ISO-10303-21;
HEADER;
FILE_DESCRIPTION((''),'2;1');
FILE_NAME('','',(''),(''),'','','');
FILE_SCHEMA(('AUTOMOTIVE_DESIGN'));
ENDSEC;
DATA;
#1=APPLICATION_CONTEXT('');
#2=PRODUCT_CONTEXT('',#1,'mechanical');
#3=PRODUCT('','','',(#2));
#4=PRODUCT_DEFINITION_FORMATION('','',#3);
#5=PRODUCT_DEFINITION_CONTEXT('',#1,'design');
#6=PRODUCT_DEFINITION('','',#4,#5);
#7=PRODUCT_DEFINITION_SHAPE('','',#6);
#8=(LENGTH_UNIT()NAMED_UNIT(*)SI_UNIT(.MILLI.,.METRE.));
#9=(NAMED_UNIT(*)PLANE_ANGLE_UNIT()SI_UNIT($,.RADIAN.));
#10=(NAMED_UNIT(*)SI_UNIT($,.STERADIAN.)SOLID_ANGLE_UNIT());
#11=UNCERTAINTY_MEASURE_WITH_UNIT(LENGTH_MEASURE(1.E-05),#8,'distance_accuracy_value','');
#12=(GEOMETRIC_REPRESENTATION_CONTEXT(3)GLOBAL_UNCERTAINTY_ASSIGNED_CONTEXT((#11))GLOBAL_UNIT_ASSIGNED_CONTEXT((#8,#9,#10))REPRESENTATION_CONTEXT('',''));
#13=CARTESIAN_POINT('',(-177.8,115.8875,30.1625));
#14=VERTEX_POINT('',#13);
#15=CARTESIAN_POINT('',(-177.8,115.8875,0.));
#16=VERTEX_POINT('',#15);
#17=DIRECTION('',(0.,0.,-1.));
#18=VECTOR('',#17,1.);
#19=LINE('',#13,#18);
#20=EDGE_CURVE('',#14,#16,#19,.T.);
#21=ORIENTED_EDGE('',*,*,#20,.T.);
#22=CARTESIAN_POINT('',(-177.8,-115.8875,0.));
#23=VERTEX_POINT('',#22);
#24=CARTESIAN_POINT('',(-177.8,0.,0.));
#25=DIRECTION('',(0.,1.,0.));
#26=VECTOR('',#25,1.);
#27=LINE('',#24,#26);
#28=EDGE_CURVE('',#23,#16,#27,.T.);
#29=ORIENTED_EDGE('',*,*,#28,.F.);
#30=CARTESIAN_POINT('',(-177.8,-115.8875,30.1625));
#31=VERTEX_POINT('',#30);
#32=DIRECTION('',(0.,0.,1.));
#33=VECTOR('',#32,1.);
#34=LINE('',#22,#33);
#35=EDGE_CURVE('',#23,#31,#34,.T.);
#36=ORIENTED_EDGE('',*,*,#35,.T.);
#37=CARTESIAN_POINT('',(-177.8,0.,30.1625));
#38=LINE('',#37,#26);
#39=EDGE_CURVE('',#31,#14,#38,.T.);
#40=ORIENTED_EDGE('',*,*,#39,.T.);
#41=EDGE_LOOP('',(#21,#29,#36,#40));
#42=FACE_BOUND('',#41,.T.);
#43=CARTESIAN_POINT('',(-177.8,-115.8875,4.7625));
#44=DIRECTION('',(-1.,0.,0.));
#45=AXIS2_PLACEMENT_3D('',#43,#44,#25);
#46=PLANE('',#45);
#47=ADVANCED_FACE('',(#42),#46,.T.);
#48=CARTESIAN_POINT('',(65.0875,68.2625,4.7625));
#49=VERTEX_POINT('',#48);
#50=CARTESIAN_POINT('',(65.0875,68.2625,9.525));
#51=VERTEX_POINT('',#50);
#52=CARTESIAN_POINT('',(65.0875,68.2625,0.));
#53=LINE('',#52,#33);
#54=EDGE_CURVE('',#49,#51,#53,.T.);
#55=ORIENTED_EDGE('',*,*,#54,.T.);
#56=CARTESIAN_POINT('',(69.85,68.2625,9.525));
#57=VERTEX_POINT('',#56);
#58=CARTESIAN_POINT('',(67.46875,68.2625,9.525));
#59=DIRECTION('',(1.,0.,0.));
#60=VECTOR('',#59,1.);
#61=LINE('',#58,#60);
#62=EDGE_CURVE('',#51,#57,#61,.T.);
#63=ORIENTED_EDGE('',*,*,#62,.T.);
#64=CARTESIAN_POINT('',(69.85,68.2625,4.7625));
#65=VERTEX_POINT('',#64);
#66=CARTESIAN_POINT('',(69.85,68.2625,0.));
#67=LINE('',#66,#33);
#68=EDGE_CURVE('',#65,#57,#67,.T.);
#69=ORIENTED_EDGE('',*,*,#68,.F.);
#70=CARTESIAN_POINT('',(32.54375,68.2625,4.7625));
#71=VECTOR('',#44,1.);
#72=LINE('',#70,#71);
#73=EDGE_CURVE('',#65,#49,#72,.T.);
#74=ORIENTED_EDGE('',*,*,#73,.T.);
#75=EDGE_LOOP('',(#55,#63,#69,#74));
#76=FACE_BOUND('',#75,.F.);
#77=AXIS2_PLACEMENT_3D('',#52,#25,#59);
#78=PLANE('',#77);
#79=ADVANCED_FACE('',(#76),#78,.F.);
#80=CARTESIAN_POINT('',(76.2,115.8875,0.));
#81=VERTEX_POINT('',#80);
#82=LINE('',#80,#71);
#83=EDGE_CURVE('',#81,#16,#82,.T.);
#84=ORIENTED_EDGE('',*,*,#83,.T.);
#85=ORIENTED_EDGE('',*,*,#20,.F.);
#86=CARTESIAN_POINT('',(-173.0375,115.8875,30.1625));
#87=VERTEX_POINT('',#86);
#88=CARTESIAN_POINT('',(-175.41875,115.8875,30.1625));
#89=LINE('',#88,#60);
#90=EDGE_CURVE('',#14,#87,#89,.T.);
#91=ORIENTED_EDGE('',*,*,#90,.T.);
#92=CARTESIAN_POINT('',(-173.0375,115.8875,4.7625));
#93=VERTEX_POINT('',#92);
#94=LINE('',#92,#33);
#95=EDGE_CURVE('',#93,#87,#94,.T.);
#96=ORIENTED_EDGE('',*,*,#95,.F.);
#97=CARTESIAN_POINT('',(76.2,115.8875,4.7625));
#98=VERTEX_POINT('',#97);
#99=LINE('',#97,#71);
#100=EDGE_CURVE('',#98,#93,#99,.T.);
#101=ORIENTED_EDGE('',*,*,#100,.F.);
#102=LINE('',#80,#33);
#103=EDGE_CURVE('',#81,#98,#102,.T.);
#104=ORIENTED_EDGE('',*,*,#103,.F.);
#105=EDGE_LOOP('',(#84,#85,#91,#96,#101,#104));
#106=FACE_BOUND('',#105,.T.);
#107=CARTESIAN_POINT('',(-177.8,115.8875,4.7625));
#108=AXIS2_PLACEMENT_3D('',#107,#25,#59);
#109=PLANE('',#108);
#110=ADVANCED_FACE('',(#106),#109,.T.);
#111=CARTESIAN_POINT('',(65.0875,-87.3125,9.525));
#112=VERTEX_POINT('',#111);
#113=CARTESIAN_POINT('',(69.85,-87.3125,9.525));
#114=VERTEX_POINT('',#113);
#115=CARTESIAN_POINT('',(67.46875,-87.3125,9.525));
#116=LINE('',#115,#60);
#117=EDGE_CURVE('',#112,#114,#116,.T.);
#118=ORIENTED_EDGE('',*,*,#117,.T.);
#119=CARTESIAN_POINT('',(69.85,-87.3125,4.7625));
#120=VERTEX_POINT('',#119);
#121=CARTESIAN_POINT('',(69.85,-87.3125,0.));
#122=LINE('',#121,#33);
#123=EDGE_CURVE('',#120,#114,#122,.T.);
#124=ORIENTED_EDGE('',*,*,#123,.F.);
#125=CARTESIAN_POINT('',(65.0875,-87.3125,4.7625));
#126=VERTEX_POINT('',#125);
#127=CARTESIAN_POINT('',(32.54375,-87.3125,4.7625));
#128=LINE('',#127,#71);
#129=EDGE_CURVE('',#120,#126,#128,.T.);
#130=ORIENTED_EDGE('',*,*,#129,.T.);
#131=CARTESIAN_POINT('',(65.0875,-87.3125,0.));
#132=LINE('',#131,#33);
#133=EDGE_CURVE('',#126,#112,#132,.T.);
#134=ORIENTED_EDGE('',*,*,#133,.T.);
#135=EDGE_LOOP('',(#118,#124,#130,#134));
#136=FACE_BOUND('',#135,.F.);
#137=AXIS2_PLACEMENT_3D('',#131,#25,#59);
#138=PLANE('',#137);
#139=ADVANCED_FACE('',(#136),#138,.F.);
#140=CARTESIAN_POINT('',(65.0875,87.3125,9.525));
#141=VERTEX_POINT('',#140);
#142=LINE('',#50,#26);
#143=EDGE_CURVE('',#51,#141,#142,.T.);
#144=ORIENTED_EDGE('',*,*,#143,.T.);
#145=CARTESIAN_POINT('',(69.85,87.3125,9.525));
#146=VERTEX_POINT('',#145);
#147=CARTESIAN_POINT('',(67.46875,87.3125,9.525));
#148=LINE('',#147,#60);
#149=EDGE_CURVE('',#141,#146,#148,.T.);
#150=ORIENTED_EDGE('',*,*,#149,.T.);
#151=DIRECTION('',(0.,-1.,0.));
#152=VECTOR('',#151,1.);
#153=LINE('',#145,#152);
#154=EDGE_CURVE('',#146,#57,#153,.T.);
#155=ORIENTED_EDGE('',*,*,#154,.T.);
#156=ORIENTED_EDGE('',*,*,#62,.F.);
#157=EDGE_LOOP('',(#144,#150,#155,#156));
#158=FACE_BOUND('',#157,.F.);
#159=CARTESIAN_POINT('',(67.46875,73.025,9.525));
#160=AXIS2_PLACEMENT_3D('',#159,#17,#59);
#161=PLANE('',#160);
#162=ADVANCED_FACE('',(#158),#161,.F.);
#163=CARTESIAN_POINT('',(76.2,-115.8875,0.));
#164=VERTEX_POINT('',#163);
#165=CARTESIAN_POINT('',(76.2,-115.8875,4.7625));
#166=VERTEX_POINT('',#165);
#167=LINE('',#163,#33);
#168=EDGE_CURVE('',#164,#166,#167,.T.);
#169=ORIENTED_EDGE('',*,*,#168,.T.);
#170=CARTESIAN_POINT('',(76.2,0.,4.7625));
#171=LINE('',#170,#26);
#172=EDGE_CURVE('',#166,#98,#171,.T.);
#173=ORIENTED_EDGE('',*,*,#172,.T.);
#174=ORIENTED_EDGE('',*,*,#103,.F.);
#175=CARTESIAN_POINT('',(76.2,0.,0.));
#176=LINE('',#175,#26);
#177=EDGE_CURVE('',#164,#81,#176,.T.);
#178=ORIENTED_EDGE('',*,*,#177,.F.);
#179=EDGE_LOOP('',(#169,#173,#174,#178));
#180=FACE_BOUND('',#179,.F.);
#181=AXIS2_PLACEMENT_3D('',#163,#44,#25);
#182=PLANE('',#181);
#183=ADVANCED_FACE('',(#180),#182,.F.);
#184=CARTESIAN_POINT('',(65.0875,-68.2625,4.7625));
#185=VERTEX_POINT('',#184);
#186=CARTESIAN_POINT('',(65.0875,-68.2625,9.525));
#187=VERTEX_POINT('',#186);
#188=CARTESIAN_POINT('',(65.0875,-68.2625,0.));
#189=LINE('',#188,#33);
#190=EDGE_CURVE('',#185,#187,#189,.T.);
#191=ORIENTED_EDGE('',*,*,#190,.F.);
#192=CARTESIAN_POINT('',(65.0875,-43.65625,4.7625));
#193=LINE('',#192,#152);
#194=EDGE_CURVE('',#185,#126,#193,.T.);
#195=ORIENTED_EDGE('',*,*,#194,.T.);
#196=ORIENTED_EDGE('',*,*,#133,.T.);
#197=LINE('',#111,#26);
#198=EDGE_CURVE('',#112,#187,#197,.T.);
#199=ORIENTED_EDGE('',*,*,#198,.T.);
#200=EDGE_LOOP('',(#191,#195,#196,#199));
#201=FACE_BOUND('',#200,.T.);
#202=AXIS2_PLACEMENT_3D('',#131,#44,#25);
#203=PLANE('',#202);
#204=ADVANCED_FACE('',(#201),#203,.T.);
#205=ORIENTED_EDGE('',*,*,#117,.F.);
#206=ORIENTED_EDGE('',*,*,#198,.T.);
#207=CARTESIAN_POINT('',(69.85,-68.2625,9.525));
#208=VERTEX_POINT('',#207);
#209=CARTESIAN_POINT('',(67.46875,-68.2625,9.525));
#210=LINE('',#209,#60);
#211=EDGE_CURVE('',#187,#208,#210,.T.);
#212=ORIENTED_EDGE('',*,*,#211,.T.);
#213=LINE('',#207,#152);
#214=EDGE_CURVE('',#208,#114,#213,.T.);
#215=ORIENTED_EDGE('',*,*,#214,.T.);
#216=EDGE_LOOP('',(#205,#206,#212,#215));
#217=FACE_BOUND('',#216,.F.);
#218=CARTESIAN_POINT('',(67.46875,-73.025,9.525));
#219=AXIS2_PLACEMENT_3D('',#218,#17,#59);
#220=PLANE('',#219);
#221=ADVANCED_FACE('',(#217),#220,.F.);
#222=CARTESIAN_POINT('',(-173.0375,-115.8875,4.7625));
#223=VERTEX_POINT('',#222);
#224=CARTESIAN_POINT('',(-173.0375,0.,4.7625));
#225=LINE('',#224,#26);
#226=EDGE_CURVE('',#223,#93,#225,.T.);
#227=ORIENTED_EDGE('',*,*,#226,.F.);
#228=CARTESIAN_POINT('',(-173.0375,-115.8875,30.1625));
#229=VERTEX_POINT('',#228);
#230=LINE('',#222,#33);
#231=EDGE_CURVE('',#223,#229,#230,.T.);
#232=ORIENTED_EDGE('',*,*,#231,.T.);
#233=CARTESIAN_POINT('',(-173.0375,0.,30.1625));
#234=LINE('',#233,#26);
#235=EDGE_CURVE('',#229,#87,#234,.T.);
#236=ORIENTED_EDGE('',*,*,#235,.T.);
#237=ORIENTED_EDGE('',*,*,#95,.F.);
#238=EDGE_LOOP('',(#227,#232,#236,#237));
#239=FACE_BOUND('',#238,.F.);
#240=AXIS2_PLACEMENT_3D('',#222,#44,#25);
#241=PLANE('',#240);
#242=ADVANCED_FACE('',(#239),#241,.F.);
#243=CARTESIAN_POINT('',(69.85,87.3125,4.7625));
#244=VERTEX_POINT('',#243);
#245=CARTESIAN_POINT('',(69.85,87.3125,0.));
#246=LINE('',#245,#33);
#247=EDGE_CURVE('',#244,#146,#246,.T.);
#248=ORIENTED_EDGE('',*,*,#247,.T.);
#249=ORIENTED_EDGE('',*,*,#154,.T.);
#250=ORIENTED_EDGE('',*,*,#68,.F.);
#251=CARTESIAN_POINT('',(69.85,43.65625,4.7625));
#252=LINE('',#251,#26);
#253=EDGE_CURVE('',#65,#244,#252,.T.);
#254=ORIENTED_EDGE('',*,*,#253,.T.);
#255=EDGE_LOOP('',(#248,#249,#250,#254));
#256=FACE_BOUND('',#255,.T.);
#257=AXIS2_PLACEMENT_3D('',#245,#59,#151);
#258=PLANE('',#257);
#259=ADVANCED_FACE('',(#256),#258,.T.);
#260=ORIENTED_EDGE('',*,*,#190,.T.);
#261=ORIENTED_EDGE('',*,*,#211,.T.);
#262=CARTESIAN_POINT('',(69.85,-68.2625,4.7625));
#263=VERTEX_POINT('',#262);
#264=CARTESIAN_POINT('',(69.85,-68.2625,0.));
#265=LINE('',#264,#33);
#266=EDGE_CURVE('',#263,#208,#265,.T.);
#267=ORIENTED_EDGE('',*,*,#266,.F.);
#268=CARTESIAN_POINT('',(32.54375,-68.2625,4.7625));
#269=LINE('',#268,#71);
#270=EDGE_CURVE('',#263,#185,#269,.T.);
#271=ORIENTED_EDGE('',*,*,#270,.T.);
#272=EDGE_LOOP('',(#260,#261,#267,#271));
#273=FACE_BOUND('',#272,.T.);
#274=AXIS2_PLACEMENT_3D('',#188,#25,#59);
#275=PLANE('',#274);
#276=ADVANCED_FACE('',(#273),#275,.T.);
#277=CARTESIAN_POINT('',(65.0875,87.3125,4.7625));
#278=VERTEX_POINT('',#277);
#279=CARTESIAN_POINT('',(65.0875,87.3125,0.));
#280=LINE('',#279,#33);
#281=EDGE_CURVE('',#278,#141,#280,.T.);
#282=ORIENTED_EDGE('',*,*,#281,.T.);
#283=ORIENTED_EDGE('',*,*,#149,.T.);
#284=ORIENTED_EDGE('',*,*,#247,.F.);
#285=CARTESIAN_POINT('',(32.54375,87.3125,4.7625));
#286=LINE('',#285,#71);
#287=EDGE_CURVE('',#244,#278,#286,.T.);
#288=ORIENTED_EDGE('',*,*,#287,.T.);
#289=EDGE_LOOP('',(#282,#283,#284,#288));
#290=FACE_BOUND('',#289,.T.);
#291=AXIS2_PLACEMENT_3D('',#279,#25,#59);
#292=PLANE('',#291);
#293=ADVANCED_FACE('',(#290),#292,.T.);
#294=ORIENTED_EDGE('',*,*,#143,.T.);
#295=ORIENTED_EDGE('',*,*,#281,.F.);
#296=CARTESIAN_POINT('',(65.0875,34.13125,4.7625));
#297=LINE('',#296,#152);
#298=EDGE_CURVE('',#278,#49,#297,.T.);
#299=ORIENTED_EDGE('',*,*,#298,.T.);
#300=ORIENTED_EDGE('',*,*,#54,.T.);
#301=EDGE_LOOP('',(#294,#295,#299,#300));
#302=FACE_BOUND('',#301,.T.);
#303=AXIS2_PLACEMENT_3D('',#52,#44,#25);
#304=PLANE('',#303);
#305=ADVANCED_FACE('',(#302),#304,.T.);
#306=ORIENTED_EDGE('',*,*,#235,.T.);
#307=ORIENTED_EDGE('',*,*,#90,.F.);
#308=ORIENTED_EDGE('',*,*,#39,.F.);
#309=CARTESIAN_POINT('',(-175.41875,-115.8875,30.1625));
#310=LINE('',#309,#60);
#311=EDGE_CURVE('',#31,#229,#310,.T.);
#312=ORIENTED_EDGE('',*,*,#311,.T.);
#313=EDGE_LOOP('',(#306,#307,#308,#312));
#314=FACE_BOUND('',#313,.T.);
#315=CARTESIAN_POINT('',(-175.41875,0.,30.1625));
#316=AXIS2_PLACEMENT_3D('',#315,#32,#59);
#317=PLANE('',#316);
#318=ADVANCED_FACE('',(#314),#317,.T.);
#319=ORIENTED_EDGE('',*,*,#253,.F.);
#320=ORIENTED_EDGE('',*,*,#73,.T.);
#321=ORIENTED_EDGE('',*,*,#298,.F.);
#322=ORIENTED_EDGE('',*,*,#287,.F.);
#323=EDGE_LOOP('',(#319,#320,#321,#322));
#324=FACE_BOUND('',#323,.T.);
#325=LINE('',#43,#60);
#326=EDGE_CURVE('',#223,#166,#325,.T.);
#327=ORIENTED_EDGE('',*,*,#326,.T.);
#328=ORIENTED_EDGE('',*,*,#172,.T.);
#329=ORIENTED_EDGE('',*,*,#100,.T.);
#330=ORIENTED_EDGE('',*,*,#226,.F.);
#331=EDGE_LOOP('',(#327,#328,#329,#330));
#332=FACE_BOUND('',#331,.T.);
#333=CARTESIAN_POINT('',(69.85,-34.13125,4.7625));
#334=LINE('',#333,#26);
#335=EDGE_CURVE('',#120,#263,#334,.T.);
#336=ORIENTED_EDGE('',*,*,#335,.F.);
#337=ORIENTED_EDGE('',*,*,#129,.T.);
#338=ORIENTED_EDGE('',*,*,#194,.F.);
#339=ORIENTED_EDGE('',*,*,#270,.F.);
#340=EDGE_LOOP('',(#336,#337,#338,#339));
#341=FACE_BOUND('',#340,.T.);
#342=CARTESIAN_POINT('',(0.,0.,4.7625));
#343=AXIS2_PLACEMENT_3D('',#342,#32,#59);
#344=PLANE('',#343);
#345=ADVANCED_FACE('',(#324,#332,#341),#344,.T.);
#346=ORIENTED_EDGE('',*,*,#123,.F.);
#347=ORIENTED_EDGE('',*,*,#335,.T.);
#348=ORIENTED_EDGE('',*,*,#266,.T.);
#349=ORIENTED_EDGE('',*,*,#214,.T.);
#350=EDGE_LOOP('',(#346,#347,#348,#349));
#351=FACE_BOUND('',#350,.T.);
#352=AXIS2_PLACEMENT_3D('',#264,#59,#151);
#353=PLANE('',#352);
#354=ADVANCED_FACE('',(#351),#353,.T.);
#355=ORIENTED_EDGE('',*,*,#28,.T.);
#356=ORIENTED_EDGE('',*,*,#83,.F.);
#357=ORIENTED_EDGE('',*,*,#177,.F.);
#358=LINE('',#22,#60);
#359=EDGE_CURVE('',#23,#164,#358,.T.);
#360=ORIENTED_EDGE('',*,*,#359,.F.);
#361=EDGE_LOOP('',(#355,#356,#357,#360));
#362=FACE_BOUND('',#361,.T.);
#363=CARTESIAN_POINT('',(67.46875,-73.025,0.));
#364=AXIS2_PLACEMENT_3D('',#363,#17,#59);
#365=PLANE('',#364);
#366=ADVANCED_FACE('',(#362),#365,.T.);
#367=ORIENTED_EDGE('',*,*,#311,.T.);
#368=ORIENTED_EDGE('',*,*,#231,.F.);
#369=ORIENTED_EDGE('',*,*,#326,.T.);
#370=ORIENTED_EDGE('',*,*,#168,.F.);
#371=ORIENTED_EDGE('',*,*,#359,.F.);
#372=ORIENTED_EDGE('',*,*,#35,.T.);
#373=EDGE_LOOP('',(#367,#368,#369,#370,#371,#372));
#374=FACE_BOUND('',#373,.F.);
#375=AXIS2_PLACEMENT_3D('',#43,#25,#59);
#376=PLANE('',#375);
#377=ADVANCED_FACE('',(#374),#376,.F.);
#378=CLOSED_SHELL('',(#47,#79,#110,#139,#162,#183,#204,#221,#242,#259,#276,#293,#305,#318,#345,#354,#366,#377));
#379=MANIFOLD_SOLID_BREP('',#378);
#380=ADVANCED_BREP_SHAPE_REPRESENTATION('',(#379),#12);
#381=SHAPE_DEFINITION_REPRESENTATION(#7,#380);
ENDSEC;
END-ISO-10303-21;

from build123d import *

# Parameters (mm, degrees)
F0_W     = 152.4
F0_H     = 231.775
F0_W_2   = 25.4
F0_W_3   = 76.2
F1_DEPTH = 4.7625
F2_W     = 4.7625
F2_H     = 231.775
F3_DEPTH = 25.4
F4_W     = 4.7625
F4_H     = 9.525
F5_DEPTH = 9.525


with BuildPart() as f1:
    # F0 (on Top) → F1 (new body)
    with BuildSketch(Plane.XY):
        Rectangle(F0_W, F0_H)
        with Locations((-88.9, 0)):
            Rectangle(F0_W_2, F0_H)
        with Locations((-139.7, 0)):
            Rectangle(F0_W_3, F0_H)
    extrude(amount=F1_DEPTH)

    # F2 (on face) → F3 (join)
    with BuildSketch(Plane.XY.offset(4.7625)):
        with Locations((-175.41875, 0)):
            Rectangle(F2_W, F2_H)
    extrude(amount=F3_DEPTH)

    # F4 (on face) → F5 (join)
    with BuildSketch(Plane(origin=(0, 0, 0), x_dir=(1, 0, 0), z_dir=(0, 0, -1))):
        with Locations((67.46875, 73.025)):
            Rectangle(F4_W, F4_H)
        with Locations((67.46875, -73.025)):
            Rectangle(F4_W, F4_H)
        with Locations((67.46875, 82.55)):
            Rectangle(F4_W, F4_H)
        with Locations((67.46875, -82.55)):
            Rectangle(F4_W, F4_H)
    extrude(amount=-F5_DEPTH)


solid = f1.part
